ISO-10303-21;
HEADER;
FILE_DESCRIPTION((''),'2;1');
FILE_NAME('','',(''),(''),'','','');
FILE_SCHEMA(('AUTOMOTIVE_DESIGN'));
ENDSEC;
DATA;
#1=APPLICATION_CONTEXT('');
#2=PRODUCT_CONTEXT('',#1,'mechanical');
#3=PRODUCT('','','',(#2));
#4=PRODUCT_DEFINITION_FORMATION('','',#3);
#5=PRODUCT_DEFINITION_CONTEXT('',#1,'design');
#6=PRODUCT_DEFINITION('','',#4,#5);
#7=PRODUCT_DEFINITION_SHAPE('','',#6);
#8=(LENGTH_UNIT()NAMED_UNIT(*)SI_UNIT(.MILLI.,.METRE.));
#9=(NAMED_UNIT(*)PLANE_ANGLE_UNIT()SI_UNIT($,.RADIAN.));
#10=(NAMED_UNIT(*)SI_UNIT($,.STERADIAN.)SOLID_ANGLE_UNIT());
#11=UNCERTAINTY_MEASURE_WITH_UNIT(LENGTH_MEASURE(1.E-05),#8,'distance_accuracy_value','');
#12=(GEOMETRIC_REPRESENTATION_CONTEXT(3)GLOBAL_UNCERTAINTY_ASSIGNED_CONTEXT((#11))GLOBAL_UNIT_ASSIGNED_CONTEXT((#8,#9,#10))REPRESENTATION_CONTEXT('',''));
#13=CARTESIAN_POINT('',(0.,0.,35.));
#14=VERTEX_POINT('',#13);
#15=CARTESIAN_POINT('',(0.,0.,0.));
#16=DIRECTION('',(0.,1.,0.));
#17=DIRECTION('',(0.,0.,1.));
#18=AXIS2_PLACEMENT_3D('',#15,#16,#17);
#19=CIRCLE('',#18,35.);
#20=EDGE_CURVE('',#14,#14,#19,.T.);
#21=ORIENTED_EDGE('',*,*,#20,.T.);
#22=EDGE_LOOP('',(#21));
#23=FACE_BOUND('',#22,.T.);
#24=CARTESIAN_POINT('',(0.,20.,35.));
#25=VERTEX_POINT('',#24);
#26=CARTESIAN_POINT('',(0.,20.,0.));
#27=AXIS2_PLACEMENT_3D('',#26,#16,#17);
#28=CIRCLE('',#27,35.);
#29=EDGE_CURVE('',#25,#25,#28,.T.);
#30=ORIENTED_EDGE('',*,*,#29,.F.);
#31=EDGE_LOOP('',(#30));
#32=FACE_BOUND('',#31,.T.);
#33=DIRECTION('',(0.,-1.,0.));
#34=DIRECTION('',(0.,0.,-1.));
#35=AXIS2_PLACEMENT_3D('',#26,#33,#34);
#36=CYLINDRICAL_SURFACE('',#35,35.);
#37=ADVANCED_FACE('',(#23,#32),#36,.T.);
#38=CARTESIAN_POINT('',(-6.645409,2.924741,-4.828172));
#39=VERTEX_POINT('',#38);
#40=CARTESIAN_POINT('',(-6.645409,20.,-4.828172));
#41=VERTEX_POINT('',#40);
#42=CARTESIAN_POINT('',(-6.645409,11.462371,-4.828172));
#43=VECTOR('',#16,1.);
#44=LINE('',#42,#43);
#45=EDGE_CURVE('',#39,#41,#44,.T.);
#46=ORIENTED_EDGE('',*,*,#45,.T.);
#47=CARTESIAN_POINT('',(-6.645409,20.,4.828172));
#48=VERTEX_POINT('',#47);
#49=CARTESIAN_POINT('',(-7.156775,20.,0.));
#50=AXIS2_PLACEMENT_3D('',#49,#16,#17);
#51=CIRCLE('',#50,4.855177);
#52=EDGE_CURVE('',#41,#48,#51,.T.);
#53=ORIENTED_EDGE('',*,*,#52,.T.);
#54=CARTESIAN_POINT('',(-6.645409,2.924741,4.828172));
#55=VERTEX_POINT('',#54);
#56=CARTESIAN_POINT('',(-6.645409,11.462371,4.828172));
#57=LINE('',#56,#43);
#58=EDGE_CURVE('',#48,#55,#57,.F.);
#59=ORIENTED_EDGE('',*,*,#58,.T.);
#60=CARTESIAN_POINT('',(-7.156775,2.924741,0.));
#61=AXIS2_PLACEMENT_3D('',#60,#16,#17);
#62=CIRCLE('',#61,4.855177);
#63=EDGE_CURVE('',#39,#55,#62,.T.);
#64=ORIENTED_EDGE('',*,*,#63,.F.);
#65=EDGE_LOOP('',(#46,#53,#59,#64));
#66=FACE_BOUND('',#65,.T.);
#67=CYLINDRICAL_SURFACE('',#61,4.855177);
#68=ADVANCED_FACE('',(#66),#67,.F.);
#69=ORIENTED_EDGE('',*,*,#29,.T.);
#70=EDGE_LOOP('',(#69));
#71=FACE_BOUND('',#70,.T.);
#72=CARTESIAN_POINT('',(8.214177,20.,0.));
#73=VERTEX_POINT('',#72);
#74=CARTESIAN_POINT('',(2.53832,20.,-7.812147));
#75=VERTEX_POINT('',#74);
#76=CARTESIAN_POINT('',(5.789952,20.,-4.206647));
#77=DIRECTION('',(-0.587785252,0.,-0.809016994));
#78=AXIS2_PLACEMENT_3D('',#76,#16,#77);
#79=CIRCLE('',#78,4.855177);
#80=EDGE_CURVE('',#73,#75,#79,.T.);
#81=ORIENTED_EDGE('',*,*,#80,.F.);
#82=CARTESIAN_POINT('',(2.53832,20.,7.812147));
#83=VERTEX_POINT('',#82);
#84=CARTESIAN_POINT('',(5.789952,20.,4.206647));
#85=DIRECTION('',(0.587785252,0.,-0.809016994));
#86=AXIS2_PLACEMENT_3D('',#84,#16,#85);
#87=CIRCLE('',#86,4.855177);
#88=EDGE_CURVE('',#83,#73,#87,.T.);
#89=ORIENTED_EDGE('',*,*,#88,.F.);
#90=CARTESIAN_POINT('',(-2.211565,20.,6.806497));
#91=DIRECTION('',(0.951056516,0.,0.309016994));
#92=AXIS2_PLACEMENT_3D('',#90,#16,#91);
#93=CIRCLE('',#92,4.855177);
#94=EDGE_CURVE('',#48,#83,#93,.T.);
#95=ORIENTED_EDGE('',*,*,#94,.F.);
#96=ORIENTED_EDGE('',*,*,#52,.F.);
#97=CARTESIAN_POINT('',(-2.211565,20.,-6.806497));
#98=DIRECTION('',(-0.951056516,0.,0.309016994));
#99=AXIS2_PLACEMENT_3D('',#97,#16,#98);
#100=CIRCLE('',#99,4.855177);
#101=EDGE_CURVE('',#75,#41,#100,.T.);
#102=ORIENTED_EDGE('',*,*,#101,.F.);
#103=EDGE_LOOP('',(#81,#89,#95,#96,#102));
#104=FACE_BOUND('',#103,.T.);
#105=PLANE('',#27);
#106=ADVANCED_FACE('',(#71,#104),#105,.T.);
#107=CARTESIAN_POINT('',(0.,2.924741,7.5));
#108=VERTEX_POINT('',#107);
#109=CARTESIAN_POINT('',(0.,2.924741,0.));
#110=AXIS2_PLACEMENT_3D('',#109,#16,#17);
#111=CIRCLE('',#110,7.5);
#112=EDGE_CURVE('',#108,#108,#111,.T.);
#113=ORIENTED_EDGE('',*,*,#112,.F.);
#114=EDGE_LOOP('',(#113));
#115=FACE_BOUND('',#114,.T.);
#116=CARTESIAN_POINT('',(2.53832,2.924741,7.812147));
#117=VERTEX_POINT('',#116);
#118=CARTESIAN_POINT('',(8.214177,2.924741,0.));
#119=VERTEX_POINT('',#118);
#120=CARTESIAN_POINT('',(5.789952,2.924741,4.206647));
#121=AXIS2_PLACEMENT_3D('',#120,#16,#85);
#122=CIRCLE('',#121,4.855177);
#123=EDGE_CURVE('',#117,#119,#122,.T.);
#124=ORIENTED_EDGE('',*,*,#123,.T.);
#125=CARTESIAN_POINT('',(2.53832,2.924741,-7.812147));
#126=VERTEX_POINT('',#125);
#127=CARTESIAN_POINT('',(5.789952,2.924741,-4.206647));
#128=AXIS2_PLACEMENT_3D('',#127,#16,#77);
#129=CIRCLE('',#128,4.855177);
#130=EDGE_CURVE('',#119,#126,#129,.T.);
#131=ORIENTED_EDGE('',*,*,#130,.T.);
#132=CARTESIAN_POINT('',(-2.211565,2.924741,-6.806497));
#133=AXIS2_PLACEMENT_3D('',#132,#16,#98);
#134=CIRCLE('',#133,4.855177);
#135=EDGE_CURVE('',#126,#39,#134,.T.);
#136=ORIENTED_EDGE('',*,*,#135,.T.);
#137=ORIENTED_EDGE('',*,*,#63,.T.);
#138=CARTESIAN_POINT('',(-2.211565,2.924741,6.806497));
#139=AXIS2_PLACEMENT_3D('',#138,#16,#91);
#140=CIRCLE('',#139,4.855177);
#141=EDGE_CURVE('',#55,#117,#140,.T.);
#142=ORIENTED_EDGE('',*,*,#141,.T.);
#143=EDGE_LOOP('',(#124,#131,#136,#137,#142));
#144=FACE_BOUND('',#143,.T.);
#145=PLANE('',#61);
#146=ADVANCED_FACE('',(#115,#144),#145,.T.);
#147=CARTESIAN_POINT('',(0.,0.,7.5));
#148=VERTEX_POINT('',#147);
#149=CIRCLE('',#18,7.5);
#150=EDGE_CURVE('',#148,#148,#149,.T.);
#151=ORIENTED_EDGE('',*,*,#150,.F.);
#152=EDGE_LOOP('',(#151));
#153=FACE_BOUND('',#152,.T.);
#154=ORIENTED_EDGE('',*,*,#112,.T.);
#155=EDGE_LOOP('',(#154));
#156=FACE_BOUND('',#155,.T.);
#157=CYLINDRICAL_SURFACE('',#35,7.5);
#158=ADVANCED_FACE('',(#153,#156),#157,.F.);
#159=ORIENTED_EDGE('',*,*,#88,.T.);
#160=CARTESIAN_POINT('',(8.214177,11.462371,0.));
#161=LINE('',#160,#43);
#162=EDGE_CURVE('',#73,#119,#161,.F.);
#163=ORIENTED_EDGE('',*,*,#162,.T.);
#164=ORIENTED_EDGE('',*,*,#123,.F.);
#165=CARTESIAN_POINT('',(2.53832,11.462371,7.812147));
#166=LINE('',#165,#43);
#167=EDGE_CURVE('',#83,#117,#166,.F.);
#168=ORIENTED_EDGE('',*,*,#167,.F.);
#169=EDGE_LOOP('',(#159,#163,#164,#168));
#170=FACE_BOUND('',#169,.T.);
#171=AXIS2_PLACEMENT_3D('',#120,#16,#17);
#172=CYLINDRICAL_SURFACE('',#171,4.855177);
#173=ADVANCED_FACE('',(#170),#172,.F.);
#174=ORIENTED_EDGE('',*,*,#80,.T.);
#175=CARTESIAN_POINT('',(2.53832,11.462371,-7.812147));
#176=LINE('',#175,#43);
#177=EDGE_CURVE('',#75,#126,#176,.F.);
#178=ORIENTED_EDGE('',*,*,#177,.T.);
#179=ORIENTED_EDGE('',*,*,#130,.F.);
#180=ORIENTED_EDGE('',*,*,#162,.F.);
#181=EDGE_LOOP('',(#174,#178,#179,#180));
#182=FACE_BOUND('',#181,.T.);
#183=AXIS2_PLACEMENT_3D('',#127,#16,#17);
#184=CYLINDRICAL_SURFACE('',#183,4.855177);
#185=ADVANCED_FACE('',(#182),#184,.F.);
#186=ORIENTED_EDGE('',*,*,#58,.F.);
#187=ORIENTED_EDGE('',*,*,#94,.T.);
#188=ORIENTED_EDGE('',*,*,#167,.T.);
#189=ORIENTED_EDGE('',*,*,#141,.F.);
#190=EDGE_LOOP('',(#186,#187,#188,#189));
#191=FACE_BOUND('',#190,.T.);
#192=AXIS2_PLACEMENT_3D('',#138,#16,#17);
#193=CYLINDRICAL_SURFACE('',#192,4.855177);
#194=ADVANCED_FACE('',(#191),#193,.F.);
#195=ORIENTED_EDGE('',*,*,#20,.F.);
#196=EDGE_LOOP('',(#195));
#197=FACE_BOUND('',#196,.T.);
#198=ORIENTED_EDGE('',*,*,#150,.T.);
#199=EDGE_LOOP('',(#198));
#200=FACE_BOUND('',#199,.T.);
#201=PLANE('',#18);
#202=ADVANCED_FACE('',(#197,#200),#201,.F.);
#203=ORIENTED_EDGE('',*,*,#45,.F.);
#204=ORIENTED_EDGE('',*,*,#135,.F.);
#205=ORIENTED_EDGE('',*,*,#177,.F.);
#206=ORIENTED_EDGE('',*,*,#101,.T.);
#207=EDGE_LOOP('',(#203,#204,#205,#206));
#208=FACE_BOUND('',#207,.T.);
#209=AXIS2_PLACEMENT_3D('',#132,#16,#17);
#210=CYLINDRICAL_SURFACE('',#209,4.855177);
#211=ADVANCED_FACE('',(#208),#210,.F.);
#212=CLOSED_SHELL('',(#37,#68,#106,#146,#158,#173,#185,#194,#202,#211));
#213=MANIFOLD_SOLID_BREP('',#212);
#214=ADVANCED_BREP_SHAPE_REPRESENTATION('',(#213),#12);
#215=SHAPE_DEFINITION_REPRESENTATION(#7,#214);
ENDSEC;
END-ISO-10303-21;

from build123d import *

# Parameters (mm, degrees)
SKETCH1_R           = 35
BOSS_EXTRUDE1_DEPTH = 20
SKETCH2_R           = 7.5
CUT_EXTRUDE1_DEPTH  = 54.38539126
SKETCH3_R           = 4.855176947
CUT_EXTRUDE2_DEPTH  = 17.075258824
CIRPATTERN1_COUNT   = 5


with BuildPart() as part:
    # Sketch1 → Boss-Extrude1 (new body)
    with BuildSketch(Plane(origin=(0, 0, 0), x_dir=(1, 0, 0), z_dir=(0, 1, 0))):
        Circle(SKETCH1_R)
    extrude(amount=BOSS_EXTRUDE1_DEPTH)

    # Sketch2 → Cut-Extrude1 (cut, through all)
    with BuildSketch(Plane(origin=(0, 0, 0), x_dir=(1, 0, 0), z_dir=(0, 1, 0))):
        Circle(SKETCH2_R)
    extrude(amount=CUT_EXTRUDE1_DEPTH, mode=Mode.SUBTRACT)

    # Sketch3 → Cut-Extrude2 (cut)
    with BuildSketch(Plane(origin=(0, 20, 0), x_dir=(1, 0, 0), z_dir=(0, 1, 0))):
        with Locations((-7.156774824, 0)):
            Circle(SKETCH3_R)
    cut_extrude2 = extrude(amount=-CUT_EXTRUDE2_DEPTH, mode=Mode.SUBTRACT)

    # CirPattern1: Cut-Extrude2 ×5 about axis
    cirpattern1_axis = Axis((0, 0, 0), (0, 1, 0))
    for i in range(1, CIRPATTERN1_COUNT):
        add(cut_extrude2.rotate(cirpattern1_axis, i * 360 / CIRPATTERN1_COUNT), mode=Mode.SUBTRACT)


solid = part.part
